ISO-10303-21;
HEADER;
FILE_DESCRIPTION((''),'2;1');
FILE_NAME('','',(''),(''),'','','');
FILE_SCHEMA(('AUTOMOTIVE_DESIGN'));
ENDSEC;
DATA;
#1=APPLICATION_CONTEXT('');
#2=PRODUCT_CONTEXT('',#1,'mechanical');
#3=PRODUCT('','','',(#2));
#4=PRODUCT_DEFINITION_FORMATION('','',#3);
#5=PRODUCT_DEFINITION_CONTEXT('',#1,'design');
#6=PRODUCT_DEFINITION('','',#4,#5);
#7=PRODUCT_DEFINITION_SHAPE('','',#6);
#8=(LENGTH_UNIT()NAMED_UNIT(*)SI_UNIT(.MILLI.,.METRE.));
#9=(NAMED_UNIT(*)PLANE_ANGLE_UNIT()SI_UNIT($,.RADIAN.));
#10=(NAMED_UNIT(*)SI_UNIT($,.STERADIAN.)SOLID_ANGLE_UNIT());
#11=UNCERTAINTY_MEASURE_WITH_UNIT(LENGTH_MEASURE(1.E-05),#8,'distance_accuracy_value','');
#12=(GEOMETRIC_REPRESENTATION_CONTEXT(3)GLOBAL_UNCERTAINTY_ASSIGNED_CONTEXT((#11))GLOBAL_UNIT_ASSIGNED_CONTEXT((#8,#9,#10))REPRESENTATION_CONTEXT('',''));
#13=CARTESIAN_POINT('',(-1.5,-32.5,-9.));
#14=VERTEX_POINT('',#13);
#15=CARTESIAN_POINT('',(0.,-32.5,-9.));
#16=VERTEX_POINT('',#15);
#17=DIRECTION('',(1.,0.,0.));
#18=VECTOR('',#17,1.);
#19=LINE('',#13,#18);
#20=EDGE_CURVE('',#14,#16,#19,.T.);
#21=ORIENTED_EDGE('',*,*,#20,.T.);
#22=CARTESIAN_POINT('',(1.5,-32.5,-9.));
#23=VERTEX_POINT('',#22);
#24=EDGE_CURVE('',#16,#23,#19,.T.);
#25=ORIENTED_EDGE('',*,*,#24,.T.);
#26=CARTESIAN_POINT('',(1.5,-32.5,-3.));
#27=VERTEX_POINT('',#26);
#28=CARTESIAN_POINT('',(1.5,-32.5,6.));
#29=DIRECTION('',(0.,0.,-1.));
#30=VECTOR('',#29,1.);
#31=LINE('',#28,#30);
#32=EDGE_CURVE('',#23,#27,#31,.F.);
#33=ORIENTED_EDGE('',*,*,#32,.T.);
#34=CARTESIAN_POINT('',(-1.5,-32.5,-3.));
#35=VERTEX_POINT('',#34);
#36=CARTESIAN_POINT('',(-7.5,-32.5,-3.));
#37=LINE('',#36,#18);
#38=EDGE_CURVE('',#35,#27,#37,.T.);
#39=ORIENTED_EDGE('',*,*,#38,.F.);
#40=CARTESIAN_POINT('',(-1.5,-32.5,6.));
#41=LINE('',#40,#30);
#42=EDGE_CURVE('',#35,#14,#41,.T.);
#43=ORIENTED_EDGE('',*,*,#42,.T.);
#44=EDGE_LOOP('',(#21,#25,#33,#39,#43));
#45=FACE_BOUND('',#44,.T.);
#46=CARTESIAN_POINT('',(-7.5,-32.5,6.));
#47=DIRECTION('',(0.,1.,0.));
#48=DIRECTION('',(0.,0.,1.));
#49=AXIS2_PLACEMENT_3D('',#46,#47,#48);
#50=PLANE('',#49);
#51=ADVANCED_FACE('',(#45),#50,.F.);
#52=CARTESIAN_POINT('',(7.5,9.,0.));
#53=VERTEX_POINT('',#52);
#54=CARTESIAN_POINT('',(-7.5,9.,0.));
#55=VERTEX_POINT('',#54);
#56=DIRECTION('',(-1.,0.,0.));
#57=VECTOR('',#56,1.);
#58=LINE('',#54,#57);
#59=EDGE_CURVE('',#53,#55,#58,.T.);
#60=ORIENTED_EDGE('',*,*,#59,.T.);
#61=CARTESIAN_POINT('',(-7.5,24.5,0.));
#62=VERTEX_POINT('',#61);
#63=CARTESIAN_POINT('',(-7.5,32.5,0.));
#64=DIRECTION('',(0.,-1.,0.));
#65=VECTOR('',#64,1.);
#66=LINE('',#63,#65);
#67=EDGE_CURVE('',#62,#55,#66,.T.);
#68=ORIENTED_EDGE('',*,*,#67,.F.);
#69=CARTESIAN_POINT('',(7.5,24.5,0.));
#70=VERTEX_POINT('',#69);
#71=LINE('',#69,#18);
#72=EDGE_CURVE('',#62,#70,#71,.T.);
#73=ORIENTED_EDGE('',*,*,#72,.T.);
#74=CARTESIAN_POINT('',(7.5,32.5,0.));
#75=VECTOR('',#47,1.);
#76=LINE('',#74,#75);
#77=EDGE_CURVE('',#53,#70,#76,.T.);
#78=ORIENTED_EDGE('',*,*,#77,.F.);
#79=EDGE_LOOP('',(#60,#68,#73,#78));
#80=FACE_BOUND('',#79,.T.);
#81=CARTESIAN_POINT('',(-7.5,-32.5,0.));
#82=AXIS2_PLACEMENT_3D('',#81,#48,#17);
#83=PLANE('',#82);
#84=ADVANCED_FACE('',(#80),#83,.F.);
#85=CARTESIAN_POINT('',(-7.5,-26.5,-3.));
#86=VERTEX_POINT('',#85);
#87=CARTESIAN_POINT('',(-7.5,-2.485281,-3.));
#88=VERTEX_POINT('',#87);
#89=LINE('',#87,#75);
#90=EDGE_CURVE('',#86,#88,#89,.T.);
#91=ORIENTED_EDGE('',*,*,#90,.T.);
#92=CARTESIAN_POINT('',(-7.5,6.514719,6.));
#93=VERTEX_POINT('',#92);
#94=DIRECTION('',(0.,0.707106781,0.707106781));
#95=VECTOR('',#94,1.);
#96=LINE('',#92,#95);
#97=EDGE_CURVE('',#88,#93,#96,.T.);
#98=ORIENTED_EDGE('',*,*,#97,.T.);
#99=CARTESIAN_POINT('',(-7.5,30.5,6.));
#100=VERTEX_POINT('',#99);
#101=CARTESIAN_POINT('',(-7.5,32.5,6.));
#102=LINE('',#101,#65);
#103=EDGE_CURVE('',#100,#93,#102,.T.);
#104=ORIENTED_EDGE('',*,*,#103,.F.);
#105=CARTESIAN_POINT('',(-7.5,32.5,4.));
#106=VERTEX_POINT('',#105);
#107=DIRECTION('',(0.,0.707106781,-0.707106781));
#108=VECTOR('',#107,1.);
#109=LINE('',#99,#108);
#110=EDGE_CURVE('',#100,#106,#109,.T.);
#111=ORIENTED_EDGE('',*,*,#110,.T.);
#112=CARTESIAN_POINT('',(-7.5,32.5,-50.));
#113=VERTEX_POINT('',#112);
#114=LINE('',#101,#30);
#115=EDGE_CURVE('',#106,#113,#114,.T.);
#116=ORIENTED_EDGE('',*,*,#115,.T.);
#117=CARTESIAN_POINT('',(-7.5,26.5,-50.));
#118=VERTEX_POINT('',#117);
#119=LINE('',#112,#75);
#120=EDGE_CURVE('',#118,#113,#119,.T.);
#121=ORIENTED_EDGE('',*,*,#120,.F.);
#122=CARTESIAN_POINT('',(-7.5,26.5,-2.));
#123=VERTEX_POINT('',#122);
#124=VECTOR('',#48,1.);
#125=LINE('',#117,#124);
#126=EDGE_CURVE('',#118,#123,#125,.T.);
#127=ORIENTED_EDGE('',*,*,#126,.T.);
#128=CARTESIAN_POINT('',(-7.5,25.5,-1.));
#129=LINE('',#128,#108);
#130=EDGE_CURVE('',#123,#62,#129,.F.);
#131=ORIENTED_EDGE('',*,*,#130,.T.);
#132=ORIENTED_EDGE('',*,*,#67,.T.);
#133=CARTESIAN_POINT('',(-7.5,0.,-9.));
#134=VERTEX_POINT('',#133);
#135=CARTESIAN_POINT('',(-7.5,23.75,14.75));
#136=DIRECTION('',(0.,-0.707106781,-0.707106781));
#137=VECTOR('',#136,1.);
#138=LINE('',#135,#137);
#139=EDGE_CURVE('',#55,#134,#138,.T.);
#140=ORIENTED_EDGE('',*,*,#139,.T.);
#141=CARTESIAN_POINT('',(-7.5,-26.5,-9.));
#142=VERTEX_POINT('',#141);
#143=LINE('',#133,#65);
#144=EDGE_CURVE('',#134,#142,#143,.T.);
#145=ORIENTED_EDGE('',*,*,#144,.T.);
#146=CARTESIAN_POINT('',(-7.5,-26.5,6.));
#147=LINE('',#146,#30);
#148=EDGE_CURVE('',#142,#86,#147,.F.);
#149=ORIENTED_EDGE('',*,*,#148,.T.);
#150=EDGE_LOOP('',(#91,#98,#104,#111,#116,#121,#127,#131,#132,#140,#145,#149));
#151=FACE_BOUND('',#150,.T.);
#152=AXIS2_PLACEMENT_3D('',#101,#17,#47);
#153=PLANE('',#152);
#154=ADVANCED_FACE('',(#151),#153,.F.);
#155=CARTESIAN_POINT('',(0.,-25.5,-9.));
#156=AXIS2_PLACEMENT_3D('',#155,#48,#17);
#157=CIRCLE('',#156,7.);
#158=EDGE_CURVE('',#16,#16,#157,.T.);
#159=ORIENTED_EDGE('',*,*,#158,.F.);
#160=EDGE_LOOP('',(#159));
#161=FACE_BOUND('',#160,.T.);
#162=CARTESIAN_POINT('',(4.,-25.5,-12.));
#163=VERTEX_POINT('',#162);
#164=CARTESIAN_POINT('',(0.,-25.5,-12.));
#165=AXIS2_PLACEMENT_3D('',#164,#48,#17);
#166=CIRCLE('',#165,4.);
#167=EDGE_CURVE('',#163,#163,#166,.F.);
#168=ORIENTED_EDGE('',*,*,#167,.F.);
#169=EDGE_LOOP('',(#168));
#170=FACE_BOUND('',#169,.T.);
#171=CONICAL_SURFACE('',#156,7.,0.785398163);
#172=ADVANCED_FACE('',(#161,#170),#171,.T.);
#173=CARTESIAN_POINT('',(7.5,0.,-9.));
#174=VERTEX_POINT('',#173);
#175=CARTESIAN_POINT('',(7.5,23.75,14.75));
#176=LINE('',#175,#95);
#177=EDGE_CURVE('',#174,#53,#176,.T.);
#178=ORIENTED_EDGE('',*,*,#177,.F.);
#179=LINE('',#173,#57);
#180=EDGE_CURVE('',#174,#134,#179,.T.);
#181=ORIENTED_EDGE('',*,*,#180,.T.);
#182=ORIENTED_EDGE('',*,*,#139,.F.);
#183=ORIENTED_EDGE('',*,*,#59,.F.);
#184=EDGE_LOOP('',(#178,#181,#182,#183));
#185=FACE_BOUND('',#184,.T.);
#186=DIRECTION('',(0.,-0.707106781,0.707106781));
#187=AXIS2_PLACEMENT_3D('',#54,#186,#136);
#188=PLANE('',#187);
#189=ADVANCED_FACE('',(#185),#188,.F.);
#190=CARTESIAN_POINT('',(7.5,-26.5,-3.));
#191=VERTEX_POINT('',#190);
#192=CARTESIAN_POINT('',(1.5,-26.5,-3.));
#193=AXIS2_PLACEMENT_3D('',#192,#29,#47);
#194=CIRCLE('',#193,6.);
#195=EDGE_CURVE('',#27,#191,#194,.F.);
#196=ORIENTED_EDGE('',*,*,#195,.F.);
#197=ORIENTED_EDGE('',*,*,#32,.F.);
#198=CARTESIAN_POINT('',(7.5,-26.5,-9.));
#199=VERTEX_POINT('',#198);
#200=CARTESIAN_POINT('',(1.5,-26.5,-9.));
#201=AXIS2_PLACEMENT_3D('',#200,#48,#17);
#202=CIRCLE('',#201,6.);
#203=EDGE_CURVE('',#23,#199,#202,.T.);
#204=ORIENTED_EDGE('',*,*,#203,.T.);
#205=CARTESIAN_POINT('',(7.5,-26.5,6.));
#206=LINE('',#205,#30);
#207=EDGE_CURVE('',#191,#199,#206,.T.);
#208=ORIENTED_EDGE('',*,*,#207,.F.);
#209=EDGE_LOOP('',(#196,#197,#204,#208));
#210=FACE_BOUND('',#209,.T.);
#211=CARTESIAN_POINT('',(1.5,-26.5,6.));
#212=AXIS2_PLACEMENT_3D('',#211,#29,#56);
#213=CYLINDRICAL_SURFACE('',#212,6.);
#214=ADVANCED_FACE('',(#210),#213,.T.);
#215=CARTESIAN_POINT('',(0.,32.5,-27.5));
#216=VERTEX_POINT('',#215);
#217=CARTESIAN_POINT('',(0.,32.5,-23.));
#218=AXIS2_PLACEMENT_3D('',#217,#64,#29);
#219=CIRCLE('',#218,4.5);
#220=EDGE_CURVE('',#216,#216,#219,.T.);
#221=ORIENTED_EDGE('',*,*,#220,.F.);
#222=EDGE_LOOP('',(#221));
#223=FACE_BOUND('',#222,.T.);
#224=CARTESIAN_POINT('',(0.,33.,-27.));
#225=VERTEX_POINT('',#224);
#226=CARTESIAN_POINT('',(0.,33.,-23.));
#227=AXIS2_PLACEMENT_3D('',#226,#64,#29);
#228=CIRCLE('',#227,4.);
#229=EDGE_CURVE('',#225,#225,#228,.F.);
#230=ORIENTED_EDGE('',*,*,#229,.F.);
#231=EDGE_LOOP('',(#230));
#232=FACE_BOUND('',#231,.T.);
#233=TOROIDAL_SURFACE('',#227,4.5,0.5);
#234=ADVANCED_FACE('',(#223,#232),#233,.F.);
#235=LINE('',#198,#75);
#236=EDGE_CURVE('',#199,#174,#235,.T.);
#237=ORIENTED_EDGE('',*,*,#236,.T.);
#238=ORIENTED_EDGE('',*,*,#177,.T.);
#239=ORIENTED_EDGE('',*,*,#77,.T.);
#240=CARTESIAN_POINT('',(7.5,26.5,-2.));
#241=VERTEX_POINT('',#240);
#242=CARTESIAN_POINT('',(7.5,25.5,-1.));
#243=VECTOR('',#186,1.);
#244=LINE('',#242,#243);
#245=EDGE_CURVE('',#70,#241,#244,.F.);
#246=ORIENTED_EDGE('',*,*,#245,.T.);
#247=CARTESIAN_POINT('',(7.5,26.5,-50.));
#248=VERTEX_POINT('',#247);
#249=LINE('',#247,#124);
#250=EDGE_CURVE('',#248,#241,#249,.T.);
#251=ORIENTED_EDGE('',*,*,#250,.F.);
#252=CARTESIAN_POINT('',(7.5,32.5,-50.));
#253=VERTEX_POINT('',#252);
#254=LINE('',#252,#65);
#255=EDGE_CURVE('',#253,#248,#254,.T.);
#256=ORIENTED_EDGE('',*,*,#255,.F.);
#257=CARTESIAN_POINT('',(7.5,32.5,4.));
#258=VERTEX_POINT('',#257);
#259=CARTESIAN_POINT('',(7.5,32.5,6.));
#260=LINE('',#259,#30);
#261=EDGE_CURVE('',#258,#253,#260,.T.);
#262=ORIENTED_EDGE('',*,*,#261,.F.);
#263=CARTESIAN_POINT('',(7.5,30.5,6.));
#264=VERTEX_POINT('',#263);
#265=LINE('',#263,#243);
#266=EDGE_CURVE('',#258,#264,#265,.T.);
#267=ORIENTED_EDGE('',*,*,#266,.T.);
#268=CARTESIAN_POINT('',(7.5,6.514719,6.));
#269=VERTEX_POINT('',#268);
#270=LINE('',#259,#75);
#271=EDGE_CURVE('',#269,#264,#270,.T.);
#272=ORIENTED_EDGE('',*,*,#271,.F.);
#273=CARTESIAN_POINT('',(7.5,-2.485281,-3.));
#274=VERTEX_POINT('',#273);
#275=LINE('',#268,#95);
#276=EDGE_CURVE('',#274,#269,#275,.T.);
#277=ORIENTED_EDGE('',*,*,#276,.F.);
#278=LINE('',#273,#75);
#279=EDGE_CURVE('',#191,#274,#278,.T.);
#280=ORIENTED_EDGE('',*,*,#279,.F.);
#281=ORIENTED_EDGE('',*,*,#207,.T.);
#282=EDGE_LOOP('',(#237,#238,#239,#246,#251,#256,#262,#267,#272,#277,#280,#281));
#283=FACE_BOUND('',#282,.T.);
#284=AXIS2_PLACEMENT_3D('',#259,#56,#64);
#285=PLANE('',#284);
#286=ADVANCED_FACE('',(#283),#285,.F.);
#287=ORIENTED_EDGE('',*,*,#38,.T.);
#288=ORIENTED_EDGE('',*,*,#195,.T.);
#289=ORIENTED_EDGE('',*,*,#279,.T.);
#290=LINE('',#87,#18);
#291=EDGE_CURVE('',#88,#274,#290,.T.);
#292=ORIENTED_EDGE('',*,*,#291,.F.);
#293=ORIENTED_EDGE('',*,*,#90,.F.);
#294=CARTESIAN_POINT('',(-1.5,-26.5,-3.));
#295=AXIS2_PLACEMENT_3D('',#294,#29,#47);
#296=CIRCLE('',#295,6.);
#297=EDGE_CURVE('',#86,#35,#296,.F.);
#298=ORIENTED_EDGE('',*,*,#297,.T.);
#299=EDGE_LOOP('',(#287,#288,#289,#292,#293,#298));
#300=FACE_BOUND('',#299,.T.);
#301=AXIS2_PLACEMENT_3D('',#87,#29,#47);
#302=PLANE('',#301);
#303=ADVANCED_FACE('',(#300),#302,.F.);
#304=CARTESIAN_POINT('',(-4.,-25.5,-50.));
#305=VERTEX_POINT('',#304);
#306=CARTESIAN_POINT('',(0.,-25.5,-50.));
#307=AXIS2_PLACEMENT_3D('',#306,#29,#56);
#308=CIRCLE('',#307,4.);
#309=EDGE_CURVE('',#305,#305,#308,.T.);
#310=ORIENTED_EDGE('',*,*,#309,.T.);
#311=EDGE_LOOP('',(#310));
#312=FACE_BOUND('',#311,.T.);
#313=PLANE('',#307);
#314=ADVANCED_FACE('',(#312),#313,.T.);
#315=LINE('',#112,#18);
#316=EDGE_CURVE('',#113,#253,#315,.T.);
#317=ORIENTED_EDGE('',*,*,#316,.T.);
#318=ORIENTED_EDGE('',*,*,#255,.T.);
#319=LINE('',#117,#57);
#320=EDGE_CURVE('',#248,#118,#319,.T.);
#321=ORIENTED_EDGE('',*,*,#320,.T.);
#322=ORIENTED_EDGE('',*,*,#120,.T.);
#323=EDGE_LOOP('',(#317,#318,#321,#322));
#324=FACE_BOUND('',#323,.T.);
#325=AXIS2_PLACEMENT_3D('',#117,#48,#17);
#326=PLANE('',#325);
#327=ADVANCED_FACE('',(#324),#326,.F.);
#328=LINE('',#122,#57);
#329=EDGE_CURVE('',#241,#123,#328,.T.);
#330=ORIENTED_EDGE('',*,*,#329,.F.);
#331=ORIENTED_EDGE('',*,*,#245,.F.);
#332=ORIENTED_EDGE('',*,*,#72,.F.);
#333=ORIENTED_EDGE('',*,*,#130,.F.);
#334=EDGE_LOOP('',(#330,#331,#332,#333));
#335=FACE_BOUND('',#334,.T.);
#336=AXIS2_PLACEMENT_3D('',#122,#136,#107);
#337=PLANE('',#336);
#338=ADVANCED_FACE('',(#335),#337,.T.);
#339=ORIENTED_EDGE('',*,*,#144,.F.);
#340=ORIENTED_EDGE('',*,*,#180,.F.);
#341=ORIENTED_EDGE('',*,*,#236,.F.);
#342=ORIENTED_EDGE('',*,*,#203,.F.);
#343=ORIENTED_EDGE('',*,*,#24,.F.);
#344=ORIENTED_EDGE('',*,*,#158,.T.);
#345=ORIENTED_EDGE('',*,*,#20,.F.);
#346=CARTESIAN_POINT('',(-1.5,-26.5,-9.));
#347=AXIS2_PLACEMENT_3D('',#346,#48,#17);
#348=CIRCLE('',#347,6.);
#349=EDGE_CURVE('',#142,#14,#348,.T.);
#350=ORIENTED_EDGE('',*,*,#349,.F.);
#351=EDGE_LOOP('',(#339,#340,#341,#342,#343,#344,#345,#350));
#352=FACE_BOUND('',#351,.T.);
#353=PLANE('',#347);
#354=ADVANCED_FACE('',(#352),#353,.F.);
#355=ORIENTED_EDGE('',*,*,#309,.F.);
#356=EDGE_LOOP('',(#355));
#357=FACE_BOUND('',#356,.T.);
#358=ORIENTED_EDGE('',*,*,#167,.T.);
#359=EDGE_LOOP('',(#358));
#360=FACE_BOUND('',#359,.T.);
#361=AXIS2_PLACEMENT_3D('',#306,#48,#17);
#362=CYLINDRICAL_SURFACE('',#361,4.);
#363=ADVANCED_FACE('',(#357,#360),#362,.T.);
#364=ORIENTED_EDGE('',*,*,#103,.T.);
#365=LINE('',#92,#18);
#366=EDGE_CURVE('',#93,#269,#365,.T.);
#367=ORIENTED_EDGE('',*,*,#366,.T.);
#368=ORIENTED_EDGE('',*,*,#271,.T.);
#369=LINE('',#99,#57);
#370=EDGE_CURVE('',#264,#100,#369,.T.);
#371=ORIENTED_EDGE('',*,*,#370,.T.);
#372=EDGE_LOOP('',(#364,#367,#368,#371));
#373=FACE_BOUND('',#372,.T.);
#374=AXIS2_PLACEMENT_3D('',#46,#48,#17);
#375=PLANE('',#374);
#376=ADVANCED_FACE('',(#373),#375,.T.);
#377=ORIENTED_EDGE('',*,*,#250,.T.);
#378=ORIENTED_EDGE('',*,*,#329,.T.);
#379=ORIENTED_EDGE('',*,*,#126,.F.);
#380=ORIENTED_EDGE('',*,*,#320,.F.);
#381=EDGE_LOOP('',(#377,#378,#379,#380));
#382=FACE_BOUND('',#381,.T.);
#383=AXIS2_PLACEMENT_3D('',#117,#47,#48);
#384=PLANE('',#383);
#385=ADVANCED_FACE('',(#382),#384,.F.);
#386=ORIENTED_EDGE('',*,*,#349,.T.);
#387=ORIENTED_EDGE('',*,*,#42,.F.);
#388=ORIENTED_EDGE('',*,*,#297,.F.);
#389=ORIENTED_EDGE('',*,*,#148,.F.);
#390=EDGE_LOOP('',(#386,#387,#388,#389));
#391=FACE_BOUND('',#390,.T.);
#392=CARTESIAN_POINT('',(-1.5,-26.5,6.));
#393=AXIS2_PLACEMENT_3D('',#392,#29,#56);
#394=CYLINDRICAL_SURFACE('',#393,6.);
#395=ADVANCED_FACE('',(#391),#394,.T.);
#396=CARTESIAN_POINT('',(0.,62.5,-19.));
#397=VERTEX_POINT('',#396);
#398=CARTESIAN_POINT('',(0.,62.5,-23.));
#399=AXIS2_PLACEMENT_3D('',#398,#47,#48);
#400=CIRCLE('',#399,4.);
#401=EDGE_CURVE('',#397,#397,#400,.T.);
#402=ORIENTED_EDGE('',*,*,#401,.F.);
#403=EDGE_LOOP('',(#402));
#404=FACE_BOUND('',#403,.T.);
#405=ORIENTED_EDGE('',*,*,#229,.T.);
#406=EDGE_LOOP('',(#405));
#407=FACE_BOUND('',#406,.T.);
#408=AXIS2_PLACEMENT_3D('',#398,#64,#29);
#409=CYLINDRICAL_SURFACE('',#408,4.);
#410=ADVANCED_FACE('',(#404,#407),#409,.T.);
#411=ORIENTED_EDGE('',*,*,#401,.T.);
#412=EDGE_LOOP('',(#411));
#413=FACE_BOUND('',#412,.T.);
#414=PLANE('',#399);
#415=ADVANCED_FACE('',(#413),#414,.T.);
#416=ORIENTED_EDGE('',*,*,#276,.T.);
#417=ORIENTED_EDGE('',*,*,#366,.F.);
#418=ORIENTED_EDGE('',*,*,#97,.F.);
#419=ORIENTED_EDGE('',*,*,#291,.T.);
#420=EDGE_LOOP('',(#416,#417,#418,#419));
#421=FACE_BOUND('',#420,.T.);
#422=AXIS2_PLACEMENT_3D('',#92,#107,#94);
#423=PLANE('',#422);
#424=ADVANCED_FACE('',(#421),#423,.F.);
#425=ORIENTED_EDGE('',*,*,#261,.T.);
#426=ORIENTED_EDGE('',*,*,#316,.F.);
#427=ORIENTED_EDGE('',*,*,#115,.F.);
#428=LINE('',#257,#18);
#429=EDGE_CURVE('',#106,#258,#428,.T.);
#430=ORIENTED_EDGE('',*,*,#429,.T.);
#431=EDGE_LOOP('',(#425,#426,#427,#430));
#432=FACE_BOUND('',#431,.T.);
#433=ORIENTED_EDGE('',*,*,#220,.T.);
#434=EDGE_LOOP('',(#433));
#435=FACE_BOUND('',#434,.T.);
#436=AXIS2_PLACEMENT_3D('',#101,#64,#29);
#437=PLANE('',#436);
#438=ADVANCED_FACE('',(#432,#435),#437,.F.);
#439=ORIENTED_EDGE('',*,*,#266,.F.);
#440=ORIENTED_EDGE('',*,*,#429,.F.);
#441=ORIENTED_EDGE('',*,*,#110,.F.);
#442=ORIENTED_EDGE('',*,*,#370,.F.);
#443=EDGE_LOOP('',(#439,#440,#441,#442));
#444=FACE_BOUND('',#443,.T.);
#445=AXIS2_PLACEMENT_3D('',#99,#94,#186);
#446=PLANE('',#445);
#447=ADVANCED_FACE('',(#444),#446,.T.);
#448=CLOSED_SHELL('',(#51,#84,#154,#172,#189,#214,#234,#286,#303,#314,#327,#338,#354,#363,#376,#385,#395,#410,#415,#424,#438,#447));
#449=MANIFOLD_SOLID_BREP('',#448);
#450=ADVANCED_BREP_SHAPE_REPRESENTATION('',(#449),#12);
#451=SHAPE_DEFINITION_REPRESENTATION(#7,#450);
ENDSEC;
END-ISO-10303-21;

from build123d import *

# Parameters (mm, degrees)
CROQUIS1_W     = 15
CROQUIS1_H     = 65
EXTRUIR1_DEPTH = 6
CROQUIS2_W     = 15
CROQUIS2_H     = 6
EXTRUIR2_DEPTH = 50
CHAFL_N1_SIZE  = 2
CROQUIS3_R     = 4
EXTRUIR3_DEPTH = 50
CHAFL_N2_SIZE  = 3
REDONDEO1_R    = 6
CROQUIS4_R     = 4
EXTRUIR4_DEPTH = 30
REDONDEO2_R    = 0.5
EXTRUIR5_DEPTH = 15
CHAFL_N3_SIZE  = 9
EXTRUIR6_DEPTH = 15
CHAFL_N4_SIZE  = 3


with BuildPart() as part:
    # Croquis1 → Extruir1 (new body)
    with BuildSketch(Plane.XY):
        Rectangle(CROQUIS1_W, CROQUIS1_H)
    extrude(amount=EXTRUIR1_DEPTH)

    # Croquis2 → Extruir2 (add)
    with BuildSketch(Plane(origin=(0, 0, 0), x_dir=(-1, 0, 0), z_dir=(0, 0, -1))):
        with Locations((0, 29.5)):
            Rectangle(CROQUIS2_W, CROQUIS2_H)
    extrude(amount=EXTRUIR2_DEPTH)

    # Chaflán1
    chafl_n1_edges = [part.edges().sort_by_distance(p)[0] for p in [
        (0, 32.5, 6),
        (0, 26.5, 0),
    ]]
    chamfer(chafl_n1_edges, length=CHAFL_N1_SIZE)

    # Croquis3 → Extruir3 (add)
    with BuildSketch(Plane(origin=(0, 0, 0), x_dir=(-1, 0, 0), z_dir=(0, 0, -1))):
        with Locations(Location((0, -25.5, 0), (0, 0, 180))):
            Circle(CROQUIS3_R)
    extrude(amount=EXTRUIR3_DEPTH)

    # Chaflán2
    chafl_n2_edges = [part.edges().sort_by_distance(p)[0] for p in [
        (-4, -25.5, 0),
    ]]
    chamfer(chafl_n2_edges, length=CHAFL_N2_SIZE - 0.0001)  # a hair under: the kernel refuses the full size

    # Redondeo1
    redondeo1_edges = [part.edges().sort_by_distance(p)[0] for p in [
        (-7.5, -32.5, 3),
        (7.5, -32.5, 3),
    ]]
    fillet(redondeo1_edges, radius=REDONDEO1_R)

    # Croquis4 → Extruir4 (add)
    with BuildSketch(Plane(origin=(0, 32.5, 0), x_dir=(1, 0, 0), z_dir=(0, 1, 0))):
        with Locations(Location((0, 23, 0), (0, 0, 90))):
            Circle(CROQUIS4_R)
    extrude(amount=EXTRUIR4_DEPTH)

    # Redondeo2
    redondeo2_edges = [part.edges().sort_by_distance(p)[0] for p in [
        (0, 32.5, -19),
    ]]
    fillet(redondeo2_edges, radius=REDONDEO2_R)

    # Croquis6 → Extruir5 (add)
    with BuildSketch(Plane.XY.offset(6)):
        with BuildLine():
            Line((7.5, 0), (-7.5, 0))
            Line((-7.5, 0), (-7.5, -26.5))
            ThreePointArc((-7.5, -26.5), (-5.742640687, -30.742640687), (-1.5, -32.5))
            Line((-1.5, -32.5), (1.5, -32.5))
            ThreePointArc((1.5, -32.5), (5.742640687, -30.742640687), (7.5, -26.5))
            Line((7.5, -26.5), (7.5, 0))
        make_face()
    extrude(amount=-EXTRUIR5_DEPTH)

    # Chaflán3
    chafl_n3_edges = [part.edges().sort_by_distance(p)[0] for p in [
        (0, 0, 0),
    ]]
    chamfer(chafl_n3_edges, length=CHAFL_N3_SIZE - 0.0001)  # a hair under: the kernel refuses the full size

    # Croquis7 → Extruir6 (cut)
    with BuildSketch(Plane(origin=(7.5, 0, 0), x_dir=(0, 0, -1), z_dir=(1, 0, 0))):
        Polygon((-6, 6.514718626), (3, -2.485281374), (3, -32.5), (-11.901527466, -39.580751492), align=None)
    extrude(amount=-EXTRUIR6_DEPTH, mode=Mode.SUBTRACT)

    # Chaflán4
    chafl_n4_edges = [part.edges().sort_by_distance(p)[0] for p in [
        (-4, -25.5, -9),
    ]]
    chamfer(chafl_n4_edges, length=CHAFL_N4_SIZE - 0.0001)  # a hair under: the kernel refuses the full size


solid = part.part
